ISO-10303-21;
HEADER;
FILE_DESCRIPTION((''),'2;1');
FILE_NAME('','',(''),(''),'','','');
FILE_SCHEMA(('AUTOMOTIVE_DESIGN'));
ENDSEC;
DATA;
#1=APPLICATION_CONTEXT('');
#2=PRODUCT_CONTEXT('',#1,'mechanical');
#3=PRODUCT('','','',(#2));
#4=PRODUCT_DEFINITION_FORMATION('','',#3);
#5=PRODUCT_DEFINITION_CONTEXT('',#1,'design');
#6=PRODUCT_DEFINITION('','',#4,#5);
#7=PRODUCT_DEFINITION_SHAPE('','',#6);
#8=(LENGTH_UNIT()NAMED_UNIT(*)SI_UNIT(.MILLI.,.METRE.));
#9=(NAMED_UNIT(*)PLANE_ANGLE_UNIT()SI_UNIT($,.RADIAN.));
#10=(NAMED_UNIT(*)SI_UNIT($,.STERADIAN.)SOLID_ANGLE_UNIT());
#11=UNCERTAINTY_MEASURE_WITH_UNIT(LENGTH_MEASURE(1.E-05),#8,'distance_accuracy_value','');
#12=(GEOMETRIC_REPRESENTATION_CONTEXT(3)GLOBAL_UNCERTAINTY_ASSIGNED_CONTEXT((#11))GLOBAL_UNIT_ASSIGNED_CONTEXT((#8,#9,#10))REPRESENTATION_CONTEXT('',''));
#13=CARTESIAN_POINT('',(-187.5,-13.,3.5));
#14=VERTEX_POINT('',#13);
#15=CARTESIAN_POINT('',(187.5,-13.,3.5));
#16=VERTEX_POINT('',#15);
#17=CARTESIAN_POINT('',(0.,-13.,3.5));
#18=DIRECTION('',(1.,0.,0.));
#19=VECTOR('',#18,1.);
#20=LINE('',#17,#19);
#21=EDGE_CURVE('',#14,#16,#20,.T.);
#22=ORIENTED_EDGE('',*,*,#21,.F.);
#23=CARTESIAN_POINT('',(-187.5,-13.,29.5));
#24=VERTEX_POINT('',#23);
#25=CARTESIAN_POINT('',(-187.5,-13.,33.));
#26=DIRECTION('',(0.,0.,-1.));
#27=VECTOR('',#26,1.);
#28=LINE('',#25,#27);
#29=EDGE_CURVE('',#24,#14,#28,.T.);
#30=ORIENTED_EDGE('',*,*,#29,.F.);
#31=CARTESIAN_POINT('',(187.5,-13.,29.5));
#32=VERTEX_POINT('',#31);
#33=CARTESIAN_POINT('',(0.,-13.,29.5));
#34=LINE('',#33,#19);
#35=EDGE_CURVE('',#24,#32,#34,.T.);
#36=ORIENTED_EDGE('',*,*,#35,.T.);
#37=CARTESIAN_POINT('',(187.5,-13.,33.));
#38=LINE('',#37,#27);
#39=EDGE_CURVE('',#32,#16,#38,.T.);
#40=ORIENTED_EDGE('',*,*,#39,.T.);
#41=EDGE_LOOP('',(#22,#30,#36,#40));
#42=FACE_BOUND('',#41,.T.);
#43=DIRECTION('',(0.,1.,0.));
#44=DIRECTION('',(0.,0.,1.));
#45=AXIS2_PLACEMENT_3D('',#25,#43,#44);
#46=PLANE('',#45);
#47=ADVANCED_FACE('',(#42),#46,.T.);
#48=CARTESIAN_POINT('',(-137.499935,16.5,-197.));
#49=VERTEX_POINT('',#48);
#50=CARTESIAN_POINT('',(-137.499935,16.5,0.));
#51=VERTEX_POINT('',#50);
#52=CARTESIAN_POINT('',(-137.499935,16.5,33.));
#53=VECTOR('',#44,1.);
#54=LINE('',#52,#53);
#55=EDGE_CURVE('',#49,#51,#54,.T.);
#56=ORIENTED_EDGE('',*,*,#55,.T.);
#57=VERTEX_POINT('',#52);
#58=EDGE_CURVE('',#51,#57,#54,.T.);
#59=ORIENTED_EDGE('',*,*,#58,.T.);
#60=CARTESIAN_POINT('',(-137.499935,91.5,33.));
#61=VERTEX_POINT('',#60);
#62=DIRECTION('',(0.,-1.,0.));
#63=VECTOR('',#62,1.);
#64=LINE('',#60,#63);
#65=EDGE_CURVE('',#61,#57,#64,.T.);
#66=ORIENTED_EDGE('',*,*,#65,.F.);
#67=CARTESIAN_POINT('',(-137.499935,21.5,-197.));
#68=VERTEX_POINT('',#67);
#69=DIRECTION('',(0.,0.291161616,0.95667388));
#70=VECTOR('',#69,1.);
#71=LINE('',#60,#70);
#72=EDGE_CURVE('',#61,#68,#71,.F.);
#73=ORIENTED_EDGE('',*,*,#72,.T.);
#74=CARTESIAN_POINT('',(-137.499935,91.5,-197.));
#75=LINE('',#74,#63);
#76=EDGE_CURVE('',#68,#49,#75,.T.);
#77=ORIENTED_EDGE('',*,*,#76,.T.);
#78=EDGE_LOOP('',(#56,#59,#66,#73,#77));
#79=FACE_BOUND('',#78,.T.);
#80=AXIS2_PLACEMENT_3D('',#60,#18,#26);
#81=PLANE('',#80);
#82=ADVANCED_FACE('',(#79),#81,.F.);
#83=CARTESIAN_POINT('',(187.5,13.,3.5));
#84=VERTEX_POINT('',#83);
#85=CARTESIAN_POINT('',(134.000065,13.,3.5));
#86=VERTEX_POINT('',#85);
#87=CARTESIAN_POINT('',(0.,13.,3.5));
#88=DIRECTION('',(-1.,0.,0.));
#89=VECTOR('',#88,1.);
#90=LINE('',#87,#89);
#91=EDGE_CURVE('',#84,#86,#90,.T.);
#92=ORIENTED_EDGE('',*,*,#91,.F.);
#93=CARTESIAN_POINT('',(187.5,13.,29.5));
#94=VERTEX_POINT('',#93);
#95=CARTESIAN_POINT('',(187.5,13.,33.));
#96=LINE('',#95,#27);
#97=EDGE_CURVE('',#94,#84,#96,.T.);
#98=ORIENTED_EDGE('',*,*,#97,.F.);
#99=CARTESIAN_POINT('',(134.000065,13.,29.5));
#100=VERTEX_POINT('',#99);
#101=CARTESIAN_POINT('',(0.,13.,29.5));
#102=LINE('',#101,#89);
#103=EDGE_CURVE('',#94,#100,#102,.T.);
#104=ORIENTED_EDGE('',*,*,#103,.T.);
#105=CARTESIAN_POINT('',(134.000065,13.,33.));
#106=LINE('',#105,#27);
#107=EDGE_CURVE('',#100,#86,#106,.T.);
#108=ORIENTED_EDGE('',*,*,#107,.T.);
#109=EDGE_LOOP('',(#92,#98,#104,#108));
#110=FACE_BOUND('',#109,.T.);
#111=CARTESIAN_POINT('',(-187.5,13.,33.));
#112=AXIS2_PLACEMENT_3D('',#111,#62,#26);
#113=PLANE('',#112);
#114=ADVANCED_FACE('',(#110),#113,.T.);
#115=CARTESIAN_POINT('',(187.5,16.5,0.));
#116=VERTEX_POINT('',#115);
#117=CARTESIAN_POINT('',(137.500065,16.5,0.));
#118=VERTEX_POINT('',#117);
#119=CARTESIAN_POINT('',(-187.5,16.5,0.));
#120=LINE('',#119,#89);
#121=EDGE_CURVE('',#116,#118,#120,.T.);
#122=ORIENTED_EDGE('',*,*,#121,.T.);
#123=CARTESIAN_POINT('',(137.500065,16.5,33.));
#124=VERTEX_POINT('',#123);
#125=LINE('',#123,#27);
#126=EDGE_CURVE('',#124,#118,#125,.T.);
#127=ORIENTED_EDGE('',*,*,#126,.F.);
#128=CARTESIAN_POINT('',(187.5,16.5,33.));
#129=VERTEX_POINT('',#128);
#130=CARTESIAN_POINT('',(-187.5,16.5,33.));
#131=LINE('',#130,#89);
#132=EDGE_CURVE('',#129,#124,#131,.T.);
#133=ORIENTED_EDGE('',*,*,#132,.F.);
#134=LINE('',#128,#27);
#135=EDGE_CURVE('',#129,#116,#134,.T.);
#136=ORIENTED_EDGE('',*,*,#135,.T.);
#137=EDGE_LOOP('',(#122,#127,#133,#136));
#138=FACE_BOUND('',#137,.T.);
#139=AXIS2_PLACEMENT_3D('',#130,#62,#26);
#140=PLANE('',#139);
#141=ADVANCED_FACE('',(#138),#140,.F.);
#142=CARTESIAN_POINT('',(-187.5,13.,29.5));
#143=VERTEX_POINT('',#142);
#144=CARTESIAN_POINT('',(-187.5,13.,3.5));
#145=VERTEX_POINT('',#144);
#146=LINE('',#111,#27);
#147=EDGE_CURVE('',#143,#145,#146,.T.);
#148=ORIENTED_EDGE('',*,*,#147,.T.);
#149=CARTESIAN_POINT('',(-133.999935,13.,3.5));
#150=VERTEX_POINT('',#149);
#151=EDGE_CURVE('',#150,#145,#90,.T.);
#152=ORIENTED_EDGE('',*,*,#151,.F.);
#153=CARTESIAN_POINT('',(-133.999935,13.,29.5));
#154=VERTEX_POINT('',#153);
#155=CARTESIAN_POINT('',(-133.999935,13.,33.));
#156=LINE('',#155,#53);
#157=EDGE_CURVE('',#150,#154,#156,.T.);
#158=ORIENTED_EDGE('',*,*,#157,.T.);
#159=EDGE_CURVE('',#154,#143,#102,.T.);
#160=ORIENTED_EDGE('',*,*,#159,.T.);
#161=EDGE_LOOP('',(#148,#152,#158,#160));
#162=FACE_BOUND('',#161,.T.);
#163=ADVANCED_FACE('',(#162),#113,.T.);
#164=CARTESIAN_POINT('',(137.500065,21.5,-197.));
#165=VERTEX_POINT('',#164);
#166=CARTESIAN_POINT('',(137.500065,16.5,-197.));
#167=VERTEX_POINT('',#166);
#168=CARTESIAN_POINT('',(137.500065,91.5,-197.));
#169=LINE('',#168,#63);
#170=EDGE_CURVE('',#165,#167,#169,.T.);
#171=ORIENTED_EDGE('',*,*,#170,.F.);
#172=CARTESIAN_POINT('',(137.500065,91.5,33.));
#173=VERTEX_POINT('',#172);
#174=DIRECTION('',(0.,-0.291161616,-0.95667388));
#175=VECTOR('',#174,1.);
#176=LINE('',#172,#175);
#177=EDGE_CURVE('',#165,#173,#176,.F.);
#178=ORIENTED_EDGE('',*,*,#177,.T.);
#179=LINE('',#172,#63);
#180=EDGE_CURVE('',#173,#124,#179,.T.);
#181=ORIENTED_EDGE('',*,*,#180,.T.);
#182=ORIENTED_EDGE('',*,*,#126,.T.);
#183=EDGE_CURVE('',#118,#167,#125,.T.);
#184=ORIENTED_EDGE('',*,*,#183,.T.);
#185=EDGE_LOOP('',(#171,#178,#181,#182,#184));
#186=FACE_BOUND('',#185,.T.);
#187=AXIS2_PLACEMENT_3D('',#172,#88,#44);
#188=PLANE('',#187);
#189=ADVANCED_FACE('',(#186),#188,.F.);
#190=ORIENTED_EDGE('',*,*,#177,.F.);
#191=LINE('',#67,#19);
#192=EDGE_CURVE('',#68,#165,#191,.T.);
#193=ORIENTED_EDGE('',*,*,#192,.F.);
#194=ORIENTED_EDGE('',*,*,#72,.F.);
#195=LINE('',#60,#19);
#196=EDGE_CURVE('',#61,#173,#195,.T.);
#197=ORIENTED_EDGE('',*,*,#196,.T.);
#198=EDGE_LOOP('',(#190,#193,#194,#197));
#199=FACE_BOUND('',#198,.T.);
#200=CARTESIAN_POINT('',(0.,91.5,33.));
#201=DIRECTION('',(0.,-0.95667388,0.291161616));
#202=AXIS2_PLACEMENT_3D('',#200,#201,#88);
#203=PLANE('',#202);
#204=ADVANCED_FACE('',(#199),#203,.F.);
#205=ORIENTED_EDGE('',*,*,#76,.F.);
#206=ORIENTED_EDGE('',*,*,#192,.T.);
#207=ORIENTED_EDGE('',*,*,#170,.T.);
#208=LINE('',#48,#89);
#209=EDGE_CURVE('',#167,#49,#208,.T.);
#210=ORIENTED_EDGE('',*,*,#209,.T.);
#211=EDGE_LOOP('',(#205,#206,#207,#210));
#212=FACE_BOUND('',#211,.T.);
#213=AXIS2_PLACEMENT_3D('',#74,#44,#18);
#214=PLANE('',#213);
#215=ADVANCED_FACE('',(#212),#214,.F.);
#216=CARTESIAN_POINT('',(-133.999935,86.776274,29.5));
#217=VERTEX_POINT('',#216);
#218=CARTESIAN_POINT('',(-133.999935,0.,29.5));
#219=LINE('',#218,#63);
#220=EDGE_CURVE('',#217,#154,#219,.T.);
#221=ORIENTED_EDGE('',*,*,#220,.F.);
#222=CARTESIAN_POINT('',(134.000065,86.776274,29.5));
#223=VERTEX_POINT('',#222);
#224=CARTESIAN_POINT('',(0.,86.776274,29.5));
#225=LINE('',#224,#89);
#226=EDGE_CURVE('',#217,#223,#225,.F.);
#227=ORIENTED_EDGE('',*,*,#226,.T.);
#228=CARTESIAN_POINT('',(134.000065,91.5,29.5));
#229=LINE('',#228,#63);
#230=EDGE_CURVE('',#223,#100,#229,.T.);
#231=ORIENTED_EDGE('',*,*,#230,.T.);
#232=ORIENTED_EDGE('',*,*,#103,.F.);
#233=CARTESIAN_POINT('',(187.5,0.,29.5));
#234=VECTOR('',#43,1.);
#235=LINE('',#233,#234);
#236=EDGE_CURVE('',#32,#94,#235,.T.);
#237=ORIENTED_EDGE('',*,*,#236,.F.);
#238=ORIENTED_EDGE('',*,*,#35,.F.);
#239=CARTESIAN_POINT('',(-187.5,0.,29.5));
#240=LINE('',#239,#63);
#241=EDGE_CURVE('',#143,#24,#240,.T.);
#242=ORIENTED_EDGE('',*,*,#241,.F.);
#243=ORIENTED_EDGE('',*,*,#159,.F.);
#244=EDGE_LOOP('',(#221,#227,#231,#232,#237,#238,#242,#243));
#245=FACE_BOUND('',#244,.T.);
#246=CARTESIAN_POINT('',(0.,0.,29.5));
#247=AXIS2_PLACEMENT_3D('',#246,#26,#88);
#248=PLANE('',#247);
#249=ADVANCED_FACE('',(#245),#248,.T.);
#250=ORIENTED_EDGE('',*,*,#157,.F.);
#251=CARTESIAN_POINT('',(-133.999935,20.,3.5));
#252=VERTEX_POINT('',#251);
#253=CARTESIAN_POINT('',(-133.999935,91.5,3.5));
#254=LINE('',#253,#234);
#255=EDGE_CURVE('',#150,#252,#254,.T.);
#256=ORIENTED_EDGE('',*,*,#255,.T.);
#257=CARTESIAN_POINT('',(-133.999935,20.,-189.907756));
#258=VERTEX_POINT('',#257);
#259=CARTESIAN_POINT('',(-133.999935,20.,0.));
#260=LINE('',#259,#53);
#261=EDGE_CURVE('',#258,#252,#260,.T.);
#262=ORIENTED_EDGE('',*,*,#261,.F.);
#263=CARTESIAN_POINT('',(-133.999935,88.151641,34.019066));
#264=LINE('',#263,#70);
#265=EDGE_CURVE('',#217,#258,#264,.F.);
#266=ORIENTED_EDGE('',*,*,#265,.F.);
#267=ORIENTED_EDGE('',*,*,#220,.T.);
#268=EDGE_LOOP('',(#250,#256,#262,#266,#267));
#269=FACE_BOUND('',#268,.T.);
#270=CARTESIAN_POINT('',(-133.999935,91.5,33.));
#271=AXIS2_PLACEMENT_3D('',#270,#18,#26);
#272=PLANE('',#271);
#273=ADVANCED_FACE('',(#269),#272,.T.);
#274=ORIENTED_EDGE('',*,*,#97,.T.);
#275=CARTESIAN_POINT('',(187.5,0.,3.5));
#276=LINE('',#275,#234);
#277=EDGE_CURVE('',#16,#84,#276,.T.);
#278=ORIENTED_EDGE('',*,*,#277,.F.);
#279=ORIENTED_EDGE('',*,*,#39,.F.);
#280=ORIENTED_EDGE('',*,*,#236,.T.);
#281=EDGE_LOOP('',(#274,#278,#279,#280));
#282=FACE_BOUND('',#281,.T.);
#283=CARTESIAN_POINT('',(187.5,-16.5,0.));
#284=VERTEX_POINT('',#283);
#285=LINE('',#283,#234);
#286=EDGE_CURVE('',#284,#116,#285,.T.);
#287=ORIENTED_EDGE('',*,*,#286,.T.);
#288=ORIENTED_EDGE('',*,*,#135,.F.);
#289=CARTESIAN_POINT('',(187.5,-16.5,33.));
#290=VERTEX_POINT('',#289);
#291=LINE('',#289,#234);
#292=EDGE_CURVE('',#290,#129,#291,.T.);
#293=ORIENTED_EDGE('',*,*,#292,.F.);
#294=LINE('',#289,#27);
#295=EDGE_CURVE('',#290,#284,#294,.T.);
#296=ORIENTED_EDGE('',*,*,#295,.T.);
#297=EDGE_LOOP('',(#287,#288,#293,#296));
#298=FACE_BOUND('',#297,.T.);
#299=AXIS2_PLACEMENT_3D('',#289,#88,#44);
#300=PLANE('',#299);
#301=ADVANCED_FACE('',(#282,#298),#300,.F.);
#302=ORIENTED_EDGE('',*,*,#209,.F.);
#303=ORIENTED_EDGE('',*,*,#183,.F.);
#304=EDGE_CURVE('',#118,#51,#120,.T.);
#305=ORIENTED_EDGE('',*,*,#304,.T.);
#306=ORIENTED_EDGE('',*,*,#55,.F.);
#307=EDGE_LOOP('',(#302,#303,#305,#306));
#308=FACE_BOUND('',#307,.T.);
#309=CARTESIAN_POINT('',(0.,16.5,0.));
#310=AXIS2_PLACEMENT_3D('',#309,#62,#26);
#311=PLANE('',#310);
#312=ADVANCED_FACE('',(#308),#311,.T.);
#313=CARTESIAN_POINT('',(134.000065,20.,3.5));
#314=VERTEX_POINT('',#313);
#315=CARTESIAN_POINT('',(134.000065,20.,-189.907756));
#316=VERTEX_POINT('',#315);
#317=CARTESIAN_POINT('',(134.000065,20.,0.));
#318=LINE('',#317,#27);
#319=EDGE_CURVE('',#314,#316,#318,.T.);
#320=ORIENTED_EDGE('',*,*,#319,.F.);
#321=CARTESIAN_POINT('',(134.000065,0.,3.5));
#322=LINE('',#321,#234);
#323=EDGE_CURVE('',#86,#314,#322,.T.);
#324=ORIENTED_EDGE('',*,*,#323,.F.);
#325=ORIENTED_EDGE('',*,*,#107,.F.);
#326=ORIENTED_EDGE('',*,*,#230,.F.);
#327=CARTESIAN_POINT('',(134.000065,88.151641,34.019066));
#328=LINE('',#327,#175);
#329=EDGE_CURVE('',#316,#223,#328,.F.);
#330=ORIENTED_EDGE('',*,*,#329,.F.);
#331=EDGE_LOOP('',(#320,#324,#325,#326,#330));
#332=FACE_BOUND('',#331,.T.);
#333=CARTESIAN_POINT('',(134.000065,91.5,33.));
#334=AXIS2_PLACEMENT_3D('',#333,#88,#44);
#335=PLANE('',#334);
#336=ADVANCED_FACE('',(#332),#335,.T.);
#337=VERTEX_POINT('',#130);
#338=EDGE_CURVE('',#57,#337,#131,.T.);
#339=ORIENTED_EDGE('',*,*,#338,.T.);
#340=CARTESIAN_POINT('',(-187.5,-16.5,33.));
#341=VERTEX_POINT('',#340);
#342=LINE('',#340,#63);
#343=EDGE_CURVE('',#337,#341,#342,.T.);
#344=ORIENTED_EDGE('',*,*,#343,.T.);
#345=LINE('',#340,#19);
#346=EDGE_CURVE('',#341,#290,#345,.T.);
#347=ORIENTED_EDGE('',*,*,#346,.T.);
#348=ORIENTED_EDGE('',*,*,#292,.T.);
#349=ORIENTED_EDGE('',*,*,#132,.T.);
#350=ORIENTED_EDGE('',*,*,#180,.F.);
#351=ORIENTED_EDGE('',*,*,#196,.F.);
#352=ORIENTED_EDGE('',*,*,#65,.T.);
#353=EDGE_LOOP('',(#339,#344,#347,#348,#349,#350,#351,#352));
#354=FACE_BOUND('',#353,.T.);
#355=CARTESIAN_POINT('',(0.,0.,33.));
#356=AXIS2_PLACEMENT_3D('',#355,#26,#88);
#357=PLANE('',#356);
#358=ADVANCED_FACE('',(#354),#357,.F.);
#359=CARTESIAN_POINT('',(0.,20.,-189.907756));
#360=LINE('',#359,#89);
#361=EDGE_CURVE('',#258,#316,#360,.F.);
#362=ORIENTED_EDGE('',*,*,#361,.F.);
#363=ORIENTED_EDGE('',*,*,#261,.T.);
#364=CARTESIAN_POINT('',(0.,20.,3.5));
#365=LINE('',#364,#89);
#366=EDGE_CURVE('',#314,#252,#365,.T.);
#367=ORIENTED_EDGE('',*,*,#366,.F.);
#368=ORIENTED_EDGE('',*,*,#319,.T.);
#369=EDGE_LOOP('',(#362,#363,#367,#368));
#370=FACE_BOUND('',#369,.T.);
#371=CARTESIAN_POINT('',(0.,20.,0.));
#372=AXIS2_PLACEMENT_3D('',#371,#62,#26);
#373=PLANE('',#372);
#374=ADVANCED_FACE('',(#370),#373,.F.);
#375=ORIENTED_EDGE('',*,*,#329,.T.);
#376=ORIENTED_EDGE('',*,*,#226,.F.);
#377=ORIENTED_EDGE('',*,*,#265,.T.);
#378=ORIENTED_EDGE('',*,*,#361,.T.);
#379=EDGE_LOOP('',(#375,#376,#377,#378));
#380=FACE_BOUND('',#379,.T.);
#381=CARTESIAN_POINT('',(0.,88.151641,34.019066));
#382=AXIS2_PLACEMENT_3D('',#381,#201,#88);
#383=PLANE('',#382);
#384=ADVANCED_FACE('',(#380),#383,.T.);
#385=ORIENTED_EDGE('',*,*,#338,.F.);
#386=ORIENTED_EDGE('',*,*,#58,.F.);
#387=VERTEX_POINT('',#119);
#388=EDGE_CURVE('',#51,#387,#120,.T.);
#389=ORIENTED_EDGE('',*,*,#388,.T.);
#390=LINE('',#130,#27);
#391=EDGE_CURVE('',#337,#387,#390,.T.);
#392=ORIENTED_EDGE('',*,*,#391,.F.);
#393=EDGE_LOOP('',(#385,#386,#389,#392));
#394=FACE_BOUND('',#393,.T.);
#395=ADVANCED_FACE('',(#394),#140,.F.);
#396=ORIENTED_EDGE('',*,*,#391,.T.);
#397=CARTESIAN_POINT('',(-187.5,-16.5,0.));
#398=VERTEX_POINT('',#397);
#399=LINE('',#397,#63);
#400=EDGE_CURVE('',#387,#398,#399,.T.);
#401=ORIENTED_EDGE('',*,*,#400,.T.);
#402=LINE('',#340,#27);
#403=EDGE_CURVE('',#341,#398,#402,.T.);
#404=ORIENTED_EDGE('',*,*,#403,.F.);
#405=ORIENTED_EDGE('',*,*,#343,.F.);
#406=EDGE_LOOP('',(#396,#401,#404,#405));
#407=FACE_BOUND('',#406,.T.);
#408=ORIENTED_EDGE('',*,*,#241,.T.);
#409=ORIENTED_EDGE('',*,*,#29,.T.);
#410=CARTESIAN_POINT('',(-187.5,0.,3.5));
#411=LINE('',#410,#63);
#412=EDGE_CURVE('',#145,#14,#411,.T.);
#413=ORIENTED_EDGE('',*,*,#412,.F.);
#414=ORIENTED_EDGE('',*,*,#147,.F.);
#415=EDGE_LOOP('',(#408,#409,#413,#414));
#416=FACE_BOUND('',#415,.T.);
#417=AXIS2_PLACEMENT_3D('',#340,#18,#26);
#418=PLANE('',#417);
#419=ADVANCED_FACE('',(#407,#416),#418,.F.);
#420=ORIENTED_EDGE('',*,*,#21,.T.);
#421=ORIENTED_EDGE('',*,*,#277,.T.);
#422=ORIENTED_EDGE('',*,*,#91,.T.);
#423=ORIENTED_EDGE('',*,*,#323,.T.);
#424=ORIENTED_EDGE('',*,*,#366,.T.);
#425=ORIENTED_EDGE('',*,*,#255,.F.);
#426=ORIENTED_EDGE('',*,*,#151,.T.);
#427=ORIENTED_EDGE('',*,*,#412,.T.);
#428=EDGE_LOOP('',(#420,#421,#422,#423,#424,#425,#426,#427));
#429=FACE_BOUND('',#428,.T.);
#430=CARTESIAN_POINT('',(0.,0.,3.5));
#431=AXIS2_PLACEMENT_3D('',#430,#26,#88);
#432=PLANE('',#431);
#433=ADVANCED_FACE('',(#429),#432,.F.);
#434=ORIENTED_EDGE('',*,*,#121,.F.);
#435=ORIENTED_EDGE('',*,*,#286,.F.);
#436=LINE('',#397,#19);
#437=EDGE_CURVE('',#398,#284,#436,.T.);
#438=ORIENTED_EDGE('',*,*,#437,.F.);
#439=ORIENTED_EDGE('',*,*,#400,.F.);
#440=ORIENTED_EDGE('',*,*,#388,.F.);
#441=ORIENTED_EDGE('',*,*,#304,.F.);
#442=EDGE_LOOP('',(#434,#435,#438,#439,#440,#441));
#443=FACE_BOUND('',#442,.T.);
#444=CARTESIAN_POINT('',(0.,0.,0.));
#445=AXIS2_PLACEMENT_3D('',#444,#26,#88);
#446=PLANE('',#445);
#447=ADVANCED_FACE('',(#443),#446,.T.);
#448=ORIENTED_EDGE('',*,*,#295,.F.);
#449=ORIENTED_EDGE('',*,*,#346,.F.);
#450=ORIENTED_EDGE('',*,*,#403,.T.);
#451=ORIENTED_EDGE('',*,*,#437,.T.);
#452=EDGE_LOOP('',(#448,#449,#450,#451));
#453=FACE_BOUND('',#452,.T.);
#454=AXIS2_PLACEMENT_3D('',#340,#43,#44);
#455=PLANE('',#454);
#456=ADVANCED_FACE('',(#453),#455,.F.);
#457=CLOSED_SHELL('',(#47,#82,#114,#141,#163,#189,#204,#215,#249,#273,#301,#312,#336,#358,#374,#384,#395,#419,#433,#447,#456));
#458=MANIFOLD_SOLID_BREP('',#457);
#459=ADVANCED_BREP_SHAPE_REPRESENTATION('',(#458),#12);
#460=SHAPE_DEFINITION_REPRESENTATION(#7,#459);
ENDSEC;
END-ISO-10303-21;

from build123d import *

# Parameters (mm, degrees)
CROQUIS6_W              = 375
CROQUIS6_H              = 33
SALIENTE_EXTRUIR4_DEPTH = 33
CROQUIS7_W              = 275
CROQUIS7_H              = 230
SALIENTE_EXTRUIR5_DEPTH = 75
CHAFL_N2_START          = 77.927326738
CHAFL_N2_OUTLINE_W      = 275
CHAFL_N2_OUTLINE_H      = 245
CHAFL_N2_DEPTH          = 68.072673262
VACIADO4_T              = -3.5


with BuildPart() as part:
    # Croquis6 → Saliente-Extruir4 (new body)
    with BuildSketch(Plane.XY):
        Rectangle(CROQUIS6_W, CROQUIS6_H)
    extrude(amount=SALIENTE_EXTRUIR4_DEPTH)

    # Croquis7 → Saliente-Extruir5 (add)
    with BuildSketch(Plane(origin=(0, 16.5, 0), x_dir=(1, 0, 0), z_dir=(0, 1, 0))):
        with Locations((6.494e-05, 82)):
            Rectangle(CROQUIS7_W, CROQUIS7_H)
    extrude(amount=SALIENTE_EXTRUIR5_DEPTH)

    # Chaflán2: read off the stored shape, not the designer's step
    # Chaflán2 outline → Chaflán2 (cut)
    with BuildSketch(Plane(origin=(0, 0, 0), x_dir=(1, 0, 0), z_dir=(0, 0.9566738804288585, -0.2911616157826961)).offset(CHAFL_N2_START)):
        with Locations((6.494e-05, 62.5)):
            Rectangle(CHAFL_N2_OUTLINE_W, CHAFL_N2_OUTLINE_H)
    extrude(amount=CHAFL_N2_DEPTH, mode=Mode.SUBTRACT)

    # Vaciado4
    vaciado4_openings = [part.faces().sort_by_distance(p)[0] for p in [
        (-187.5, 0, 16.5),
        (187.5, 0, 16.5),
    ]]
    offset(amount=VACIADO4_T, openings=vaciado4_openings, kind=Kind.INTERSECTION)


solid = part.part
